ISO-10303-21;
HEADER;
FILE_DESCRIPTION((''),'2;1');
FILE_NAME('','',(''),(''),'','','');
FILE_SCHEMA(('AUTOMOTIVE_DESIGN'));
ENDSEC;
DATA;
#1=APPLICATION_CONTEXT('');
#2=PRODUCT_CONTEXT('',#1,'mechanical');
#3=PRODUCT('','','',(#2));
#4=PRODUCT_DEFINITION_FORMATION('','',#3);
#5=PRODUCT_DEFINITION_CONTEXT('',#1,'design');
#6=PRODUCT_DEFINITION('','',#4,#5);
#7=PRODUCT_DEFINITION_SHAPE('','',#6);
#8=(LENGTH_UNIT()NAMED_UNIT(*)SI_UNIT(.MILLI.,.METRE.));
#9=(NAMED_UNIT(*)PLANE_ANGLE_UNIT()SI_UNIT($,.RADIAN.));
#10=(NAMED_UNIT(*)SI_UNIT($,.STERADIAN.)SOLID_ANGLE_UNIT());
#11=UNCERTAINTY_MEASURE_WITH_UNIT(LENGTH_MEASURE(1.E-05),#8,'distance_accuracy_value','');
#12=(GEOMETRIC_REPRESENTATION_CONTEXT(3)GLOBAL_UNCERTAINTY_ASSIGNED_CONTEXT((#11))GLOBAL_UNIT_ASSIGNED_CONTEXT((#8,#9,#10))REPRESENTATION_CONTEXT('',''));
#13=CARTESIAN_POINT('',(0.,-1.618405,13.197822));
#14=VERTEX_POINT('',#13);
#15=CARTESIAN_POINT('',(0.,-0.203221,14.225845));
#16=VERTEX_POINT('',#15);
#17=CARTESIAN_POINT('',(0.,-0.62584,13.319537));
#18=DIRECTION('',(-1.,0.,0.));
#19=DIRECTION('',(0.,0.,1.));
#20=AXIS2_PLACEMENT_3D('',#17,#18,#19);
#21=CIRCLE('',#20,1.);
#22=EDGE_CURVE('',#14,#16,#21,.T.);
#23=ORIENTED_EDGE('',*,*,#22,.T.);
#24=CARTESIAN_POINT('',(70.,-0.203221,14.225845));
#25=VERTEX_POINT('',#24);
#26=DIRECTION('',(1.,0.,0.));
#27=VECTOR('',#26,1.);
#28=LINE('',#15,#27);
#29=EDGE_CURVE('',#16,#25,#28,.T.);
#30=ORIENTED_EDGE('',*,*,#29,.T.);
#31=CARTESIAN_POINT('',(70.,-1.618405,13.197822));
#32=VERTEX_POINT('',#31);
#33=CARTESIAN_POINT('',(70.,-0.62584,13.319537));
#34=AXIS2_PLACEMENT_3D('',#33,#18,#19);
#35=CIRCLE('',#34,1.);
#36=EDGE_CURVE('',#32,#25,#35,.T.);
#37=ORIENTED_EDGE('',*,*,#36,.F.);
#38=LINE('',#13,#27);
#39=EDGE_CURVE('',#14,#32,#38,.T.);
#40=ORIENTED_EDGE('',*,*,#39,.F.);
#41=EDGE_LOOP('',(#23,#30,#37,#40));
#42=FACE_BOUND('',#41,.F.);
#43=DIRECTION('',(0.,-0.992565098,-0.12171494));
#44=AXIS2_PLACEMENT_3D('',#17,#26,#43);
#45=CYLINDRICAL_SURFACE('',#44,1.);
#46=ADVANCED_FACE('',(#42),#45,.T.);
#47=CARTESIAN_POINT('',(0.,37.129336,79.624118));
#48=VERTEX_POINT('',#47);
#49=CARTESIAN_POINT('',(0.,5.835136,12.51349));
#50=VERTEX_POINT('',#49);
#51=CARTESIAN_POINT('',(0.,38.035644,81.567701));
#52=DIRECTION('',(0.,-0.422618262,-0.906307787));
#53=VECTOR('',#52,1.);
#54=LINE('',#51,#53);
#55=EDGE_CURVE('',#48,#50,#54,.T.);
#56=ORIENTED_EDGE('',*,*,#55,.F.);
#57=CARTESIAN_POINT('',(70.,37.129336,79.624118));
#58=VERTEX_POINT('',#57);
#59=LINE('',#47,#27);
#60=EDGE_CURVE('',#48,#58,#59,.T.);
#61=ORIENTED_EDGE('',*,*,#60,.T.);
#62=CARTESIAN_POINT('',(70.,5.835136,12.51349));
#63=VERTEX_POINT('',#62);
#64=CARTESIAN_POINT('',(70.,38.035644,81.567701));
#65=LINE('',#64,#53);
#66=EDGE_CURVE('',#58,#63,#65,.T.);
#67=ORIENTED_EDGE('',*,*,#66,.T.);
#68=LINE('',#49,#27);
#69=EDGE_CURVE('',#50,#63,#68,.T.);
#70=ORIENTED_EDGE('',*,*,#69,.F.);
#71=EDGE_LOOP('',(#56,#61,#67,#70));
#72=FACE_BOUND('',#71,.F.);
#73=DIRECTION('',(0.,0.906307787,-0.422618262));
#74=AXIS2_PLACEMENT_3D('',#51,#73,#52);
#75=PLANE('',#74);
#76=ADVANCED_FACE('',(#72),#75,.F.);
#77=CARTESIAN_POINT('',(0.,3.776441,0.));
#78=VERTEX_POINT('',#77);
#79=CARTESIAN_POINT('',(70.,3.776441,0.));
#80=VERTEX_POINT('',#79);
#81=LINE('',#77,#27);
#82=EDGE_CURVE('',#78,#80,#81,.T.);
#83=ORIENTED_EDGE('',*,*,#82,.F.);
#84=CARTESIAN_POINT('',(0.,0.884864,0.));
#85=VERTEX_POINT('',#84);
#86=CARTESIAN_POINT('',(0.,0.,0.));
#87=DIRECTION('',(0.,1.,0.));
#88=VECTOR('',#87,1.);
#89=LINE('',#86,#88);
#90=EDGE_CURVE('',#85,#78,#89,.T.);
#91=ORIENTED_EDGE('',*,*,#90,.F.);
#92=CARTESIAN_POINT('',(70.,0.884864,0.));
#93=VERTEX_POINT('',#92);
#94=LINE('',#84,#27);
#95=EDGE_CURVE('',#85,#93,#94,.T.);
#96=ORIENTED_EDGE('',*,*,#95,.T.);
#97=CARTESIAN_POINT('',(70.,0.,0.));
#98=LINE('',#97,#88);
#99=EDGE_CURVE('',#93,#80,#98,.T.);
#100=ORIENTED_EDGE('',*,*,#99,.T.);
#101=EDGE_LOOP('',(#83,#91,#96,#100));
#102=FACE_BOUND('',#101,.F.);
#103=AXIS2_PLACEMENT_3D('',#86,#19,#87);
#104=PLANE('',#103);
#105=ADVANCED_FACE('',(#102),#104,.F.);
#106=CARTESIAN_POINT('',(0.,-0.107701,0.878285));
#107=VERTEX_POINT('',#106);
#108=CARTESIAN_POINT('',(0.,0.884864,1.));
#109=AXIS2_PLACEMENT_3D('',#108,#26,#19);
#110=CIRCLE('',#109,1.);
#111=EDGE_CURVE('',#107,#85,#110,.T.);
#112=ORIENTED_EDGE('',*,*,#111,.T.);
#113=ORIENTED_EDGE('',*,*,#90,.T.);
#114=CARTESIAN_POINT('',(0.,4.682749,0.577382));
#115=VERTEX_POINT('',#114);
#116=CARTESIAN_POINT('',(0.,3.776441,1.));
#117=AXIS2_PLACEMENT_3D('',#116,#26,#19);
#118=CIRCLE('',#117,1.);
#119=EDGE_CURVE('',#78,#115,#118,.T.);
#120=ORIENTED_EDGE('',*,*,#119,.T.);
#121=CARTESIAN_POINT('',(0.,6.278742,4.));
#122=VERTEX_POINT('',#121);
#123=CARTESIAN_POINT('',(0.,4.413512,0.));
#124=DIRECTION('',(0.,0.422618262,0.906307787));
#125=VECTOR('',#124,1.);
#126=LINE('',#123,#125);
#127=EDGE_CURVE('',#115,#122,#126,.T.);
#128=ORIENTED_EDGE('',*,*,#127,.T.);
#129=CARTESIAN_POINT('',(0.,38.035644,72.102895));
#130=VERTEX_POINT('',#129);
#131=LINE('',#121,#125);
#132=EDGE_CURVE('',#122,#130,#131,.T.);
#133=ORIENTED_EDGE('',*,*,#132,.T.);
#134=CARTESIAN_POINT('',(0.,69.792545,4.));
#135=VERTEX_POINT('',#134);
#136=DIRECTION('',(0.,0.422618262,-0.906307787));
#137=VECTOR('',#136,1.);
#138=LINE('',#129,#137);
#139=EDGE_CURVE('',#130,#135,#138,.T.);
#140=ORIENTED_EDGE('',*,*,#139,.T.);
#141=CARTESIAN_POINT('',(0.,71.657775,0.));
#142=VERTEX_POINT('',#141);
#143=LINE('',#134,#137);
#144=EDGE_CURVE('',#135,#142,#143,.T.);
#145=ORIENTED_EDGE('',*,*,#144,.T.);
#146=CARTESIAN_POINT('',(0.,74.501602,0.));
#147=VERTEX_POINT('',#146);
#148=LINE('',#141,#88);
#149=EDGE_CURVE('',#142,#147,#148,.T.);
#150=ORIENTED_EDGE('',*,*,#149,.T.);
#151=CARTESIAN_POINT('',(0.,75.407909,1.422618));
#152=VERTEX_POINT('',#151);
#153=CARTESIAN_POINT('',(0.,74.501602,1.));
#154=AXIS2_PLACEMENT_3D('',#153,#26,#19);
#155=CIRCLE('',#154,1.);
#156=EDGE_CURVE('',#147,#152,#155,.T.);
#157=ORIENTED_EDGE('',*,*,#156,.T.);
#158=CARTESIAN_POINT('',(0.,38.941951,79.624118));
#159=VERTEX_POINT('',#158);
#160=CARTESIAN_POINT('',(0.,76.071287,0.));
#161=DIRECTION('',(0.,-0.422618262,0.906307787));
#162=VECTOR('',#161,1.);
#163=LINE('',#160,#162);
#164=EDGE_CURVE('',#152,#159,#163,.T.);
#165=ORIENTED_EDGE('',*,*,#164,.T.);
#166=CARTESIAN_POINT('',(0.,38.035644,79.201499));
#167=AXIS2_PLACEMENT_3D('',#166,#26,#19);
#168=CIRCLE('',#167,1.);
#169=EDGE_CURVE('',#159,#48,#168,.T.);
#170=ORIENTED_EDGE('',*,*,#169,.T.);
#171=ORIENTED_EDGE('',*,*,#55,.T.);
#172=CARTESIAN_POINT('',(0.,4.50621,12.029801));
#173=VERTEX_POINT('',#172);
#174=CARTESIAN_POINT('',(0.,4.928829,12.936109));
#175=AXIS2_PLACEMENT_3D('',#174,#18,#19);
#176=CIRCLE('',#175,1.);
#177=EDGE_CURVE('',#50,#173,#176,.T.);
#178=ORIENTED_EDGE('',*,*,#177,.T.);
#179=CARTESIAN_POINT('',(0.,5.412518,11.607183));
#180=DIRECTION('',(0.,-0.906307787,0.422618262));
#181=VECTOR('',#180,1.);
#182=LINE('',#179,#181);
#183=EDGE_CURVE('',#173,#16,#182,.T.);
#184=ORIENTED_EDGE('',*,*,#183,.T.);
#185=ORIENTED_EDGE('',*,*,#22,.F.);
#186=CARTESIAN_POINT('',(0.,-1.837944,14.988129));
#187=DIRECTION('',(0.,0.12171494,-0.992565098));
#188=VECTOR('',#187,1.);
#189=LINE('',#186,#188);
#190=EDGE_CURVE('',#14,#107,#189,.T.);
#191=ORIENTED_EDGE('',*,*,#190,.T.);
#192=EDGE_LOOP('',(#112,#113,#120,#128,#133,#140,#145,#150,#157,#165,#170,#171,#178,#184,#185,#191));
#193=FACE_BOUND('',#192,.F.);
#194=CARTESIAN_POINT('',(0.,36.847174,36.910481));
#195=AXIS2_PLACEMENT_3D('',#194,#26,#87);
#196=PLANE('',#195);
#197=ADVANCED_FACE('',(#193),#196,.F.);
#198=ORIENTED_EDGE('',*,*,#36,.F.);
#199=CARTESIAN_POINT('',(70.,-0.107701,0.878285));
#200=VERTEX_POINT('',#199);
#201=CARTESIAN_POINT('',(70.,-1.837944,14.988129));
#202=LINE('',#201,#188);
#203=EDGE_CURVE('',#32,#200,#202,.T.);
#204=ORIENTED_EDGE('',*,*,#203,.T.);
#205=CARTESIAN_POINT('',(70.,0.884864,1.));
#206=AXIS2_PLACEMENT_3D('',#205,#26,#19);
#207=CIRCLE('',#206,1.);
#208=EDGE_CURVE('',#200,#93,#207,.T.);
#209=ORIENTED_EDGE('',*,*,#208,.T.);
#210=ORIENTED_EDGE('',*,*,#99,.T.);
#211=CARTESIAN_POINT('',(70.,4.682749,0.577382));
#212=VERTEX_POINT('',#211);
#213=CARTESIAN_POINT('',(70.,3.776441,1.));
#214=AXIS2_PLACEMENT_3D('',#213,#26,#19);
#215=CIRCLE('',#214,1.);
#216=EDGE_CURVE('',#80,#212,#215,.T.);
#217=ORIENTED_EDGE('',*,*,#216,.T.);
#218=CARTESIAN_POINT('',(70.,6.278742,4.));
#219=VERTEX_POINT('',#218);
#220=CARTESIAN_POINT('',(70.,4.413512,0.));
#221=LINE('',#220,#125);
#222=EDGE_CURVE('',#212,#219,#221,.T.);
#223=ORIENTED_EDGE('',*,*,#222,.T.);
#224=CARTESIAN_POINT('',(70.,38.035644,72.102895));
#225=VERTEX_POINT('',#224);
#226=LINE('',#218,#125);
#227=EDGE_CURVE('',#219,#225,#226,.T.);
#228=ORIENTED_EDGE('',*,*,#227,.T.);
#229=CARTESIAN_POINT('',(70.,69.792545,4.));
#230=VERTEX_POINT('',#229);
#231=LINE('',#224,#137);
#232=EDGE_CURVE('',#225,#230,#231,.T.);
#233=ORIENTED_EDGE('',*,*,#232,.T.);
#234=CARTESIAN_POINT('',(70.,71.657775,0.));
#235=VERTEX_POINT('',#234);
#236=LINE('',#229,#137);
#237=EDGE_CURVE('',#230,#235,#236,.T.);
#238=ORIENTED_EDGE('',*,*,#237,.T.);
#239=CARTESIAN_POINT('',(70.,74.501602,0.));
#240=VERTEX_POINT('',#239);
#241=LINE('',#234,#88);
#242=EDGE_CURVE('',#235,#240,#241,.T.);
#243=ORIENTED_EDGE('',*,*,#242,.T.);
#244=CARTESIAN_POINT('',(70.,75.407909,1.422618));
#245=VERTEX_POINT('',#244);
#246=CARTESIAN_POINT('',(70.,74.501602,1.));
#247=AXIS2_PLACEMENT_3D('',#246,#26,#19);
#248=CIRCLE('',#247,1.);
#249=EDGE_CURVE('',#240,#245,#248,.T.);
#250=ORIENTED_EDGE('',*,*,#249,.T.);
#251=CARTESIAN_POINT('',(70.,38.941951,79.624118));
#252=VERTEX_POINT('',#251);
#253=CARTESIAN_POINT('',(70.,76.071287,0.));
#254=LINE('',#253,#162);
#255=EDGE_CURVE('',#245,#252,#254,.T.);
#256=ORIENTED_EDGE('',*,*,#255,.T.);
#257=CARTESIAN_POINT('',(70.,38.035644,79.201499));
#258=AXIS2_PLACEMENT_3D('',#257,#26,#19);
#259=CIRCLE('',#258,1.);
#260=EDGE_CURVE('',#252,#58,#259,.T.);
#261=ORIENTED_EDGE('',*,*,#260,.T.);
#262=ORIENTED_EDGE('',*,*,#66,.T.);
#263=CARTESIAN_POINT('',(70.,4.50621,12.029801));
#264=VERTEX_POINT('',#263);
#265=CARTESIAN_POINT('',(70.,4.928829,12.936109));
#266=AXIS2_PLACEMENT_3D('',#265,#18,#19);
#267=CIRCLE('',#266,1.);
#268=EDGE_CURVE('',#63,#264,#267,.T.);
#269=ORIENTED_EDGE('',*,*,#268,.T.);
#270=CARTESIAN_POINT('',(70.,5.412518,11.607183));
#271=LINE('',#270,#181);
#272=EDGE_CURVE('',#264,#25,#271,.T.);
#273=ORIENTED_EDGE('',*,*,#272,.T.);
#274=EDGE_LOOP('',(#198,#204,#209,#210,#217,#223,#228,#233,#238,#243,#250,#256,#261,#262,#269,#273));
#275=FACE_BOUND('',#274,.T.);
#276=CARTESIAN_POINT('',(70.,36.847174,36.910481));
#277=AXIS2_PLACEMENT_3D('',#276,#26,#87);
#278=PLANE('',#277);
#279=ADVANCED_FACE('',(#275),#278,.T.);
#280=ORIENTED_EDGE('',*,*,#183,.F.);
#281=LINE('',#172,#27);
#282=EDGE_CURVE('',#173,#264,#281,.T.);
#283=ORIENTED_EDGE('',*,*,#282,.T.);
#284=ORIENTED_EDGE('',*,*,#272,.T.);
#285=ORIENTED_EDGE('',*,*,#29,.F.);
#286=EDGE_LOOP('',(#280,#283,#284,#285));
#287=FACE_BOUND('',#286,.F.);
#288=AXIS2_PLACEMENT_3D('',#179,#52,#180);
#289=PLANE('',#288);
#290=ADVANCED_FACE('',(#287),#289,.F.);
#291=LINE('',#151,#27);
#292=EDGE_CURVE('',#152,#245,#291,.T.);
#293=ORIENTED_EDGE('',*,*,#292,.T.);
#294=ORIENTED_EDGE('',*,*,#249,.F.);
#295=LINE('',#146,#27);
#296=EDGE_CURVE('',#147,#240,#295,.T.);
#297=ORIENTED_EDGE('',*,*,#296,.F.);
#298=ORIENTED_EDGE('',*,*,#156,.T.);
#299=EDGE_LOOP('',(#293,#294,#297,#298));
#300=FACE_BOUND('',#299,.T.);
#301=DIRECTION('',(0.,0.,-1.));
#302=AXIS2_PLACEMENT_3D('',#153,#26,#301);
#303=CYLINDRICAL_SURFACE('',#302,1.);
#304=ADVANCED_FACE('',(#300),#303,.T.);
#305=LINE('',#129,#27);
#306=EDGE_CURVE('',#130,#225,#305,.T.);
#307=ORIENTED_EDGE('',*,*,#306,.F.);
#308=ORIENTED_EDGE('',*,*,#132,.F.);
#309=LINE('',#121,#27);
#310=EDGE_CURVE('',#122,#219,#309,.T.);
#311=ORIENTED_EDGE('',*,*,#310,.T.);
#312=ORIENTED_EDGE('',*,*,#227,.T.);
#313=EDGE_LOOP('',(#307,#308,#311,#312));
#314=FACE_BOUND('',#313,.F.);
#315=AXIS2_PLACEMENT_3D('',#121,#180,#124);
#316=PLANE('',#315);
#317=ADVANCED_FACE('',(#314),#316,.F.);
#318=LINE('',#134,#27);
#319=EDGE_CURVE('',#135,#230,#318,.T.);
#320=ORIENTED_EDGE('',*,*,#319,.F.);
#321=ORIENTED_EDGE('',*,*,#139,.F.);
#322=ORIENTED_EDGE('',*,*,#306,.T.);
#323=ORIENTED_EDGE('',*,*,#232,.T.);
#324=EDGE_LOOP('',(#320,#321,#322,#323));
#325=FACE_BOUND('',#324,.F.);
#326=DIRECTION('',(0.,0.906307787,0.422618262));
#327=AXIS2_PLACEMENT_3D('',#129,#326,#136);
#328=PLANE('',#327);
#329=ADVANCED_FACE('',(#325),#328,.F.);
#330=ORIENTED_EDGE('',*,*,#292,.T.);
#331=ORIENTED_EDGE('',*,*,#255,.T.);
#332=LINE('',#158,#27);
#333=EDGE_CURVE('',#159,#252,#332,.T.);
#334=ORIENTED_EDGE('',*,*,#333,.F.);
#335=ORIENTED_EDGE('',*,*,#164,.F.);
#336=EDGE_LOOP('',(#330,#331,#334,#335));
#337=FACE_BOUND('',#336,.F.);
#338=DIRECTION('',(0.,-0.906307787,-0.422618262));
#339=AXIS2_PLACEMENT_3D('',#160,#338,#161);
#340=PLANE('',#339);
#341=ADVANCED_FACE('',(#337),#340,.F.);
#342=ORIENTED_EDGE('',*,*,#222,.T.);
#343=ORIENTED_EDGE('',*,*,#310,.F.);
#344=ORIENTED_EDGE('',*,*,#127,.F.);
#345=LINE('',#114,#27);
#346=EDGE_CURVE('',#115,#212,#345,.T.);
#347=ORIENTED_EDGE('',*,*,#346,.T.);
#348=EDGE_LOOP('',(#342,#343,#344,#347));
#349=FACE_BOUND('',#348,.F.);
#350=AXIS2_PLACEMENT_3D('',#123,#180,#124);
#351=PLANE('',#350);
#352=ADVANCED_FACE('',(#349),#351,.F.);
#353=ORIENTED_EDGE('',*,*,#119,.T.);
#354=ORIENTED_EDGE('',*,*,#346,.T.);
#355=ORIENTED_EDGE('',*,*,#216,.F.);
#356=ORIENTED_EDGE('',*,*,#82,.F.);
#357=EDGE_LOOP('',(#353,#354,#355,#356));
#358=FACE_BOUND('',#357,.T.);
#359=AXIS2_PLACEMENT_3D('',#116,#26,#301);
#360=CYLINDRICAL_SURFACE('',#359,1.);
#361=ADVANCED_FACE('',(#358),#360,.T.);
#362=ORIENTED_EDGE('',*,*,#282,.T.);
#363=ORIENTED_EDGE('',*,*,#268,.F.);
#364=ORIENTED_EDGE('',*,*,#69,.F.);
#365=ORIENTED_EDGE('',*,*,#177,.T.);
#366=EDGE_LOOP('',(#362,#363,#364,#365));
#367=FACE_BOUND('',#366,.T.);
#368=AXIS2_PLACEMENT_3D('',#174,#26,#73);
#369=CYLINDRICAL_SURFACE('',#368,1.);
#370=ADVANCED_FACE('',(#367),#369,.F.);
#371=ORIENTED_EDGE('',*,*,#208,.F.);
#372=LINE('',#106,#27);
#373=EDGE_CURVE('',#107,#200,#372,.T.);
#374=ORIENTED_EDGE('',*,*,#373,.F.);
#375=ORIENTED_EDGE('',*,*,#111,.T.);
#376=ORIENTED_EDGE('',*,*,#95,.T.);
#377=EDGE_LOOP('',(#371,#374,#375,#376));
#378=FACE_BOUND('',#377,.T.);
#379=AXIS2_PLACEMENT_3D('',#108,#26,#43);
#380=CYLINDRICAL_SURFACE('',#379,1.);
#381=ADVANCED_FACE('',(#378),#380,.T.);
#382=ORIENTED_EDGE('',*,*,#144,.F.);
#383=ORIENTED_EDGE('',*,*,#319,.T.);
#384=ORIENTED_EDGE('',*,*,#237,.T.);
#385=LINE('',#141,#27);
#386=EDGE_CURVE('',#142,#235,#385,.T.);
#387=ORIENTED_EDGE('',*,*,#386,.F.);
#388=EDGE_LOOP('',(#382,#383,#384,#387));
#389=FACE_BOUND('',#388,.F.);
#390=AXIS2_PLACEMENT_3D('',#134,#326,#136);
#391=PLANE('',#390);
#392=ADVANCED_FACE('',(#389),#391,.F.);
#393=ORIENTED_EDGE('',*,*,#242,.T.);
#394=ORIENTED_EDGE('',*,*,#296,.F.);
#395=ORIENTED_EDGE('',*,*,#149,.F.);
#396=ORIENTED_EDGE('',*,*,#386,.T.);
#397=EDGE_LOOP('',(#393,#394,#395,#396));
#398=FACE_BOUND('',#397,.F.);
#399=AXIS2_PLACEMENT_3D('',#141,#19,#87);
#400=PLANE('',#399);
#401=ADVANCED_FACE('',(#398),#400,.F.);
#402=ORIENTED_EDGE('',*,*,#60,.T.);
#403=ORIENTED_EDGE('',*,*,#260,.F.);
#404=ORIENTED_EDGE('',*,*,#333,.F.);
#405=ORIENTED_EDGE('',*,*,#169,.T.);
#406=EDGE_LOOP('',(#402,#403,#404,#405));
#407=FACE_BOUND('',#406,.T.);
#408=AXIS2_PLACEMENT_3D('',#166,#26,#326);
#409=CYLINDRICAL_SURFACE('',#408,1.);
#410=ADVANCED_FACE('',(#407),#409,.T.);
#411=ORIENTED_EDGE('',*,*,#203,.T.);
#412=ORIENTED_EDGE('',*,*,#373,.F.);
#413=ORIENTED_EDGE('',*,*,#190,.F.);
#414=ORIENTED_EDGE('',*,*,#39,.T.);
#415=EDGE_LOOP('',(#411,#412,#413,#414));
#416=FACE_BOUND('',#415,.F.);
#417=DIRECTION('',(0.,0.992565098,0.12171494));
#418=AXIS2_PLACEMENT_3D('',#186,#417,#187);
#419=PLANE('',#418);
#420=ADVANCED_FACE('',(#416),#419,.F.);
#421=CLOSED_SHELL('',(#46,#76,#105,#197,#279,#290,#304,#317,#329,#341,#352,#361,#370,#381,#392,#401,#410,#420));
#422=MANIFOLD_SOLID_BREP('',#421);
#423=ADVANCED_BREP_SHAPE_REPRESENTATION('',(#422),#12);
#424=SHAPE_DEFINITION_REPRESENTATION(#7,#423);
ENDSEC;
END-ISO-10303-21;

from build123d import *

# Parameters (mm, degrees)
F1_DEPTH = 70
F2_R     = 1


with BuildPart() as f1:
    # F0 (on Right) → F1 (new body)
    with BuildSketch(Plane.YZ):
        Polygon((-1.8379441239, 14.9881287721), (0, 0), (4.4135116758, 0), (6.2787423085, 4), (38.0356435567, 72.1028945007), (69.7925448049, 4), (71.6577754375, 0), (76.0712871133, 0), (38.0356435567, 81.5677008333), (5.4125181724, 11.6071826782), align=None)
    extrude(amount=F1_DEPTH)

    # F2
    f2_edges = [f1.edges().sort_by_distance(p)[0] for p in [
        (35, -1.837944, 14.988129),
        (35, 5.412518, 11.607183),
        (35, 38.035644, 81.567701),
        (35, 0, 0),
        (35, 76.071287, 0),
        (35, 4.413512, 0),
    ]]
    fillet(f2_edges, radius=F2_R)


solid = f1.part
